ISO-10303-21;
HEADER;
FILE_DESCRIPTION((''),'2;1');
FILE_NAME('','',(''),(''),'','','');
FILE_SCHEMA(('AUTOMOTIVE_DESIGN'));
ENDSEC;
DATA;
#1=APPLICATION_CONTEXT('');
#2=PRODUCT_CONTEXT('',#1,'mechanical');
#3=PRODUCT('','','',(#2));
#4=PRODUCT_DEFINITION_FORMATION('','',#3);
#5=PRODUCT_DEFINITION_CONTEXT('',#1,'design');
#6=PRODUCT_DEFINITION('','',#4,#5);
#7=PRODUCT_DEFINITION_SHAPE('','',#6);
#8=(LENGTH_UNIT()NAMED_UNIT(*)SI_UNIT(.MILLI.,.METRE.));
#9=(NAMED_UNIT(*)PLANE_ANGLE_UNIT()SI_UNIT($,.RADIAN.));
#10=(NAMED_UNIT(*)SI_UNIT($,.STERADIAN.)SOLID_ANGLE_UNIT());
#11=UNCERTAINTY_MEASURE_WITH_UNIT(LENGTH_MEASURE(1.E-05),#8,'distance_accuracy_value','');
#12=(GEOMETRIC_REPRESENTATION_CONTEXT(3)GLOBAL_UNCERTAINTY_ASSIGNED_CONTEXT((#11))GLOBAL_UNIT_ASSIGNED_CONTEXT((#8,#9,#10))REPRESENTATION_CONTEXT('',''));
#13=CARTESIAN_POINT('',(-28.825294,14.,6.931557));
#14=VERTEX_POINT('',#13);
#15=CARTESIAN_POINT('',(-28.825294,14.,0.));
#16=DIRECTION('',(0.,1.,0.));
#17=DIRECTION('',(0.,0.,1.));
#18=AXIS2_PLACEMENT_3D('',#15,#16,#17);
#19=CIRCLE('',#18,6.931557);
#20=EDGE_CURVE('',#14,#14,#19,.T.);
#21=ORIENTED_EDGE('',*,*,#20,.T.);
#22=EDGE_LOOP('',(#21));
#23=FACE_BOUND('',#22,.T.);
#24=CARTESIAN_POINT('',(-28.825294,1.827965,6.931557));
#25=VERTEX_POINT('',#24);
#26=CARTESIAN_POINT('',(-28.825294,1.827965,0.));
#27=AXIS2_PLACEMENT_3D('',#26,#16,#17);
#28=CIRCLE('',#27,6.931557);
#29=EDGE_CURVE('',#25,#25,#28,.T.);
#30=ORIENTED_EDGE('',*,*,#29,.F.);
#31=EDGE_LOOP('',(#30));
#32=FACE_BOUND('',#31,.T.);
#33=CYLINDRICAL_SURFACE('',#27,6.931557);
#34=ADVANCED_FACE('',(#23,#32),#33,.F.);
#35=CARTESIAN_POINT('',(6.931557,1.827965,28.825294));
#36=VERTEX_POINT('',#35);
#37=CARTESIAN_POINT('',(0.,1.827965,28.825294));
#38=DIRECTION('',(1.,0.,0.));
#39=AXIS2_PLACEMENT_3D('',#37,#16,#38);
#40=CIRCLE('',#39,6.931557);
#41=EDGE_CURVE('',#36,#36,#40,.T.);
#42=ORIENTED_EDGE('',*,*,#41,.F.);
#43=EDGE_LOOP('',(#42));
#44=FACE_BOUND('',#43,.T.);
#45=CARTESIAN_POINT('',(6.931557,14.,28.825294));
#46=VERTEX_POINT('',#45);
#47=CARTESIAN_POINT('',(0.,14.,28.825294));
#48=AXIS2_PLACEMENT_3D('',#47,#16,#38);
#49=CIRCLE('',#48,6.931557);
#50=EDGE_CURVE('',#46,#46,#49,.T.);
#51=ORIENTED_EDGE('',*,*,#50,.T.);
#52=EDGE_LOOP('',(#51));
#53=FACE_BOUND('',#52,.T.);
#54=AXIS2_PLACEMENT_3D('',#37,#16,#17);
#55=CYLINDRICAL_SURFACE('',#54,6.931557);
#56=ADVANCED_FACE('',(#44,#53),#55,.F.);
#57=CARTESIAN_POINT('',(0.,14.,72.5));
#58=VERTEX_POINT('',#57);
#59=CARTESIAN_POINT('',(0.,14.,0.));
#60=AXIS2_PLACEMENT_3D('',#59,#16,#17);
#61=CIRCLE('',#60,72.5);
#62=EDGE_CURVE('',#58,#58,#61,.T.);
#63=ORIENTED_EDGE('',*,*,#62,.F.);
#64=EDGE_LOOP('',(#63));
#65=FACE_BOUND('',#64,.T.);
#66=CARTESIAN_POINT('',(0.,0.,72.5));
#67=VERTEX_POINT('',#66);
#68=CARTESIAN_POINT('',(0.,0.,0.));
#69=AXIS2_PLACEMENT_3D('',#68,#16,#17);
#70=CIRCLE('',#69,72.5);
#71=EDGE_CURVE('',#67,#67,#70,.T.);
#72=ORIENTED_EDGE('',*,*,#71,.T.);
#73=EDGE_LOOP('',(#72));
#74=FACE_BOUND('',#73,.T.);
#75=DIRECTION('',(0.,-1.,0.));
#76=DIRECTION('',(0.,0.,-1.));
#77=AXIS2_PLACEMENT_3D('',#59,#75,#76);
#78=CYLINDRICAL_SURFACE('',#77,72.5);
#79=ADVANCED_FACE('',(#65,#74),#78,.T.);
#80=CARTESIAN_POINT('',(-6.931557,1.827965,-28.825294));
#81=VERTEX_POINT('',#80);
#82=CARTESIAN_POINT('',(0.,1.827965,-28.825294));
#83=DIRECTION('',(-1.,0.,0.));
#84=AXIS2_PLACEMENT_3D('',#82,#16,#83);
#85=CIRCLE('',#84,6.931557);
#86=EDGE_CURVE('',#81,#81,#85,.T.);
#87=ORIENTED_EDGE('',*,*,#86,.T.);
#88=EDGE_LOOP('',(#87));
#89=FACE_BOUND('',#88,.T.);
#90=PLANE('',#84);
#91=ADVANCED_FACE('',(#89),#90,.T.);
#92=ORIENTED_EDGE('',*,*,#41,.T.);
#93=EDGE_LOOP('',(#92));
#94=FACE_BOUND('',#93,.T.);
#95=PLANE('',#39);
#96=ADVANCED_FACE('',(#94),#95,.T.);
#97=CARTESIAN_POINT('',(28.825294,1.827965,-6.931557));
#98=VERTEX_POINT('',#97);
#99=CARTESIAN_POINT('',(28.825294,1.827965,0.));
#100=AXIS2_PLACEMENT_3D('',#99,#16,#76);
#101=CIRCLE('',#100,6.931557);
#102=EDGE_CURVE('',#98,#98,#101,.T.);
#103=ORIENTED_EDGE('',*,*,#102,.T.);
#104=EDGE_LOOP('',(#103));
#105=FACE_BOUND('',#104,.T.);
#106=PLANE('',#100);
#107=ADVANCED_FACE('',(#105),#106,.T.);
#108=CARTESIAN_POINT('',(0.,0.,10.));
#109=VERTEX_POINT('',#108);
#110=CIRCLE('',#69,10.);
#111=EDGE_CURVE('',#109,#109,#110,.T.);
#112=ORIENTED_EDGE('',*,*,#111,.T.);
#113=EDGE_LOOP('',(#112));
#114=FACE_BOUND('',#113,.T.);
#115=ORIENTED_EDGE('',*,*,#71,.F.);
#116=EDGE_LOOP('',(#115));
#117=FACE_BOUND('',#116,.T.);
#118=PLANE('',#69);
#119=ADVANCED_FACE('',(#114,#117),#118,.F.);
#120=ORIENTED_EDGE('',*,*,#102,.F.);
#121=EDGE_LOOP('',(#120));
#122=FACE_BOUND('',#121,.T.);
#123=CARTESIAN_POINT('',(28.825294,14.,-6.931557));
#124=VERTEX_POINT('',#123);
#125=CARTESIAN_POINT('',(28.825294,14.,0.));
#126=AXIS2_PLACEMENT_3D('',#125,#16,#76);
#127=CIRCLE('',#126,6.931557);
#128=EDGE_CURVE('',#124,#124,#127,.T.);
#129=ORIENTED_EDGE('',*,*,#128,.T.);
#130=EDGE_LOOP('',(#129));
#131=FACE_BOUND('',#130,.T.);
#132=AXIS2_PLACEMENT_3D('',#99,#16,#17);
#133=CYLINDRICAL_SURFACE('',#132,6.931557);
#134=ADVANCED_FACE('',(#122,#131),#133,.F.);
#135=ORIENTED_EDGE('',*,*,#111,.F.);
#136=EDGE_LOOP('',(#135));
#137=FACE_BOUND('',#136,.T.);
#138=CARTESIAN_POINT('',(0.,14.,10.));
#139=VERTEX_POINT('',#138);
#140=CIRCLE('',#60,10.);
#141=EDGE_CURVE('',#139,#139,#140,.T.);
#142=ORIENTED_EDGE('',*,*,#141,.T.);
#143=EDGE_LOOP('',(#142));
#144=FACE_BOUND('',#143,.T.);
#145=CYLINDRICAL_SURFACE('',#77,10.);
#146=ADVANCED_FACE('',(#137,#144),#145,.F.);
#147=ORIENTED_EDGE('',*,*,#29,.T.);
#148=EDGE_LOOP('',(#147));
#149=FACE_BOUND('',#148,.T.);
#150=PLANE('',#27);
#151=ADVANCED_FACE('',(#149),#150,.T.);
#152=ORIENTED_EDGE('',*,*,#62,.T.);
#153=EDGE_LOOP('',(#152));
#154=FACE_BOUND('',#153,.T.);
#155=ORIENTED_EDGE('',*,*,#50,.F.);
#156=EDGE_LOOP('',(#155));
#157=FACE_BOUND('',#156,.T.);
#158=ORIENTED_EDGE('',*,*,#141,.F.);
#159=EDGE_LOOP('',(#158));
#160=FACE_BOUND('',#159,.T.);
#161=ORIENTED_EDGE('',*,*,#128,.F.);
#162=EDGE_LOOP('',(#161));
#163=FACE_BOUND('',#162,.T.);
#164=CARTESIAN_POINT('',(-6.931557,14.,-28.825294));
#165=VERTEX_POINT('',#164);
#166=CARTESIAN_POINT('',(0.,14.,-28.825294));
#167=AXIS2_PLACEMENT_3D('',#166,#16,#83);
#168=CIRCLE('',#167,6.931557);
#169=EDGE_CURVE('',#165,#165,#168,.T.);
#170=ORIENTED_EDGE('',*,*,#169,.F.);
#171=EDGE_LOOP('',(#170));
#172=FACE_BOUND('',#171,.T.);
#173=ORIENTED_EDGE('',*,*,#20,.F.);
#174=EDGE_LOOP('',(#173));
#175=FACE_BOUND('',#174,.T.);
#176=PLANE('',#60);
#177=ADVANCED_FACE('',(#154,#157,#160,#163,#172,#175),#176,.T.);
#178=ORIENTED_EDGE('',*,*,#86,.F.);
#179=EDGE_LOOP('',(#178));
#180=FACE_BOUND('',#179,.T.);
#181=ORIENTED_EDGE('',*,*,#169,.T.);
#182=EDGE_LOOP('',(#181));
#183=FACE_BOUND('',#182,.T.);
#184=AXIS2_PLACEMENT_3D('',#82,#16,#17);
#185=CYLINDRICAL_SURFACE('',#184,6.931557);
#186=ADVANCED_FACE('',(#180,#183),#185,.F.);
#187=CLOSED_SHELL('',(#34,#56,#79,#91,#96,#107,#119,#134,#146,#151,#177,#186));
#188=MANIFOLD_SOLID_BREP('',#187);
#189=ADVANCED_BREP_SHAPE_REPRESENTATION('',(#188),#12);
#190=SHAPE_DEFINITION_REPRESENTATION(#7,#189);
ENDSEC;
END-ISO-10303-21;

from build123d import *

# Parameters (mm, degrees)
SKETCH1_R           = 72.5
BOSS_EXTRUDE1_DEPTH = 14
SKETCH2_R           = 10
CUT_EXTRUDE1_DEPTH  = 104.481882472
SKETCH3_R           = 6.931557338
CUT_EXTRUDE2_DEPTH  = 12.17203466
CIRPATTERN1_COUNT   = 4


with BuildPart() as part:
    # Sketch1 → Boss-Extrude1 (new body)
    with BuildSketch(Plane(origin=(0, 0, 0), x_dir=(1, 0, 0), z_dir=(0, 1, 0))):
        Circle(SKETCH1_R)
    extrude(amount=BOSS_EXTRUDE1_DEPTH)

    # Sketch2 → Cut-Extrude1 (cut, through all)
    with BuildSketch(Plane(origin=(0, 0, 0), x_dir=(1, 0, 0), z_dir=(0, 1, 0))):
        Circle(SKETCH2_R)
    extrude(amount=CUT_EXTRUDE1_DEPTH, mode=Mode.SUBTRACT)

    # Sketch3 → Cut-Extrude2 (cut)
    with BuildSketch(Plane(origin=(0, 14, 0), x_dir=(1, 0, 0), z_dir=(0, 1, 0))):
        with Locations((-28.825294049, 0)):
            Circle(SKETCH3_R)
    cut_extrude2 = extrude(amount=-CUT_EXTRUDE2_DEPTH, mode=Mode.SUBTRACT)

    # CirPattern1: Cut-Extrude2 ×4 about axis
    cirpattern1_axis = Axis((0, 0, 0), (0, 1, 0))
    for i in range(1, CIRPATTERN1_COUNT):
        add(cut_extrude2.rotate(cirpattern1_axis, i * 360 / CIRPATTERN1_COUNT), mode=Mode.SUBTRACT)


solid = part.part
